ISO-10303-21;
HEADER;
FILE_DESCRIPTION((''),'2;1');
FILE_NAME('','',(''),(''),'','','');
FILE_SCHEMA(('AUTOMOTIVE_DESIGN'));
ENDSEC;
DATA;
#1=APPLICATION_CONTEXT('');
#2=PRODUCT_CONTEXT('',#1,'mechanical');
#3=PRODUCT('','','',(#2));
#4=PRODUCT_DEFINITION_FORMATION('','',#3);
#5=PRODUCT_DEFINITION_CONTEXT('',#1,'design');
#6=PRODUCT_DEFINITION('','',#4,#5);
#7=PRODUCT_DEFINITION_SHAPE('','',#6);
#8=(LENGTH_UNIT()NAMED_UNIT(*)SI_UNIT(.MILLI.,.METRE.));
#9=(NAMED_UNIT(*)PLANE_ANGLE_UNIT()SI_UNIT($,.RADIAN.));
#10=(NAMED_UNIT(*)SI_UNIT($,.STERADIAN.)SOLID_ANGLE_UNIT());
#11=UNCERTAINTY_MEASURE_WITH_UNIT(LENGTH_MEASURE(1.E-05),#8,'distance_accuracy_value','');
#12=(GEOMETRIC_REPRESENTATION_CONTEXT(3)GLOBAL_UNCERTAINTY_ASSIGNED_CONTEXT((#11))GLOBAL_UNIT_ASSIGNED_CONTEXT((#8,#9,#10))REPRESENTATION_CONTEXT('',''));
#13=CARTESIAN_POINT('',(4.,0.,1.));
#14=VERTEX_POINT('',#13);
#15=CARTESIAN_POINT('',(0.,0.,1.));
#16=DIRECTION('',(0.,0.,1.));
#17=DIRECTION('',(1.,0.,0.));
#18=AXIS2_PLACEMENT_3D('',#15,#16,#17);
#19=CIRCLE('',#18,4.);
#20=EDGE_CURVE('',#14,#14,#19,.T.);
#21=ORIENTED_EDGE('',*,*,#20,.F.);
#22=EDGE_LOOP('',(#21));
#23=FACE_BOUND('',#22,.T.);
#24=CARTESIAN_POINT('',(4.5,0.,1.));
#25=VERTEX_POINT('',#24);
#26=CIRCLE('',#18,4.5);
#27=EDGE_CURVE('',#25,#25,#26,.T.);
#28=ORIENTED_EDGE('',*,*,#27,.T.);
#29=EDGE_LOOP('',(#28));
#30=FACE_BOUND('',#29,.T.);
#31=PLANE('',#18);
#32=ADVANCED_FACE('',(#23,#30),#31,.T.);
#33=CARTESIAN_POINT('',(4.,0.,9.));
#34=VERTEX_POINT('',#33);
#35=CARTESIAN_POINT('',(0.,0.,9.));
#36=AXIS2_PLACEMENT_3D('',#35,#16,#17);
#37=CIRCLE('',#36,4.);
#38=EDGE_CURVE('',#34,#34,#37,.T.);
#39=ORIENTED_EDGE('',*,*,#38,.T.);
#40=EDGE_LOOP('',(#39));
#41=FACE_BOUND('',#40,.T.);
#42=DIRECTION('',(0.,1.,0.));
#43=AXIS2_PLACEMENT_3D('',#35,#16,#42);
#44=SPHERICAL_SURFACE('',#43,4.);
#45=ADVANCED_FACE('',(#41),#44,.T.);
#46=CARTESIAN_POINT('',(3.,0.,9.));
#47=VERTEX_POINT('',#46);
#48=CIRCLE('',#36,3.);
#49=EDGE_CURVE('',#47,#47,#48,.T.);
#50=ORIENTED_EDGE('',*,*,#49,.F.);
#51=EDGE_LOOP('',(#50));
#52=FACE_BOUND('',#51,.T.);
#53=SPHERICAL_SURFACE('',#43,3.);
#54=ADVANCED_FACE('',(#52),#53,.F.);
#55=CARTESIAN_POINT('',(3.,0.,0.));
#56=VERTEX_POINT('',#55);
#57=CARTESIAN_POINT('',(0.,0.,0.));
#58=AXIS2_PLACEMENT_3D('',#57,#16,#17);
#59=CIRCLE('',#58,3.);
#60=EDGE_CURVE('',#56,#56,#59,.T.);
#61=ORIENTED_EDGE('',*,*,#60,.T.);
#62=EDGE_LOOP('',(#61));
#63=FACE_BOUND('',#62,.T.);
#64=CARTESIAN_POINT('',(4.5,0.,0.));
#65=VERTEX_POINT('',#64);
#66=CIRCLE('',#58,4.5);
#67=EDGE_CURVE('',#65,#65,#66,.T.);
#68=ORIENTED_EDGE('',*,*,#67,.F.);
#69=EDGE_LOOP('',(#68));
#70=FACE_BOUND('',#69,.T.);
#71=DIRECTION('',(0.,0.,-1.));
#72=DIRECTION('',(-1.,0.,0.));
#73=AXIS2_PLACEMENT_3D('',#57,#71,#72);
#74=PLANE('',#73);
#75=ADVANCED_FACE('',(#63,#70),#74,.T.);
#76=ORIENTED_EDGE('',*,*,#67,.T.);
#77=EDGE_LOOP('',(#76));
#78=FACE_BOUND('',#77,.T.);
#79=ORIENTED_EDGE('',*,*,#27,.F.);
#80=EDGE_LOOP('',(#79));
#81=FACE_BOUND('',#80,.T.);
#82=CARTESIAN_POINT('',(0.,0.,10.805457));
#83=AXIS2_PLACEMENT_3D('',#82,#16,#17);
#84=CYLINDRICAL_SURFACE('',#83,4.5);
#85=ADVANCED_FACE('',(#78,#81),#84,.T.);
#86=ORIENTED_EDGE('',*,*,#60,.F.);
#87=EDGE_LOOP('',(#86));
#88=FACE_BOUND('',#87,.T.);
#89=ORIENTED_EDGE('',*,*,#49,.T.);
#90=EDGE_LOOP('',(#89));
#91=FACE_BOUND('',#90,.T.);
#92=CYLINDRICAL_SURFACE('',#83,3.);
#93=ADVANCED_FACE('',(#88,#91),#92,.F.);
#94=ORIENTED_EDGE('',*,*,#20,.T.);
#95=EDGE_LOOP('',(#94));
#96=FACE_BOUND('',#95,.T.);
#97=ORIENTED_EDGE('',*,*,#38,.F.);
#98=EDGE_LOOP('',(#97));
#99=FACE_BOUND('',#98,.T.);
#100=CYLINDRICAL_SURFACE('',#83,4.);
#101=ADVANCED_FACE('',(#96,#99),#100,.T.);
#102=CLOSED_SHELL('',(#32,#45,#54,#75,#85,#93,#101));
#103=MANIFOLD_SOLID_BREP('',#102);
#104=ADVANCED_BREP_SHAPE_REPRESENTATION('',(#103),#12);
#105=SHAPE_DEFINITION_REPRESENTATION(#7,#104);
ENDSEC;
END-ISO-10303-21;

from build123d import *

# Parameters (mm, degrees)
SKETCH1_W = 4
SKETCH1_H = 8


# Read off the part's stored shape, not the designer's step: Shell1
with BuildPart() as part:
    # Sketch1 → Revolve1 (revolve)
    with BuildSketch(Plane.YZ, mode=Mode.PRIVATE) as revolve1_sk:
        with BuildLine():
            Line((0, 13), (0, 9))
            Line((0, 9), (4, 9))
            ThreePointArc((4, 9), (2.828427125, 11.828427125), (0, 13))
        make_face()
        with Locations((2, 5)):
            Rectangle(SKETCH1_W, SKETCH1_H)
        Polygon((4, 1), (0, 1), (0, 0), (4.5, 0), (4.5, 1), align=None)
    revolve(revolve1_sk.sketch.rotate(Axis((0, 0, 10.805456946), (0, 0, -1)), 90), axis=Axis((0, 0, 10.805456946), (0, 0, -1)))

    # Shell1 outline → Shell1 (revolve, cut)
    with BuildSketch(Plane.XZ):
        with BuildLine():
            Line((0, 0), (3, 0))
            Line((3, 0), (3, 8.999999997))
            ThreePointArc((3, 8.999999997), (2.121320345, 11.121320342), (0, 12))
            Line((0, 12), (0, 0))
        make_face()
    revolve(axis=Axis((0, 0, 0), (0, 0, 1)), mode=Mode.SUBTRACT)


solid = part.part
